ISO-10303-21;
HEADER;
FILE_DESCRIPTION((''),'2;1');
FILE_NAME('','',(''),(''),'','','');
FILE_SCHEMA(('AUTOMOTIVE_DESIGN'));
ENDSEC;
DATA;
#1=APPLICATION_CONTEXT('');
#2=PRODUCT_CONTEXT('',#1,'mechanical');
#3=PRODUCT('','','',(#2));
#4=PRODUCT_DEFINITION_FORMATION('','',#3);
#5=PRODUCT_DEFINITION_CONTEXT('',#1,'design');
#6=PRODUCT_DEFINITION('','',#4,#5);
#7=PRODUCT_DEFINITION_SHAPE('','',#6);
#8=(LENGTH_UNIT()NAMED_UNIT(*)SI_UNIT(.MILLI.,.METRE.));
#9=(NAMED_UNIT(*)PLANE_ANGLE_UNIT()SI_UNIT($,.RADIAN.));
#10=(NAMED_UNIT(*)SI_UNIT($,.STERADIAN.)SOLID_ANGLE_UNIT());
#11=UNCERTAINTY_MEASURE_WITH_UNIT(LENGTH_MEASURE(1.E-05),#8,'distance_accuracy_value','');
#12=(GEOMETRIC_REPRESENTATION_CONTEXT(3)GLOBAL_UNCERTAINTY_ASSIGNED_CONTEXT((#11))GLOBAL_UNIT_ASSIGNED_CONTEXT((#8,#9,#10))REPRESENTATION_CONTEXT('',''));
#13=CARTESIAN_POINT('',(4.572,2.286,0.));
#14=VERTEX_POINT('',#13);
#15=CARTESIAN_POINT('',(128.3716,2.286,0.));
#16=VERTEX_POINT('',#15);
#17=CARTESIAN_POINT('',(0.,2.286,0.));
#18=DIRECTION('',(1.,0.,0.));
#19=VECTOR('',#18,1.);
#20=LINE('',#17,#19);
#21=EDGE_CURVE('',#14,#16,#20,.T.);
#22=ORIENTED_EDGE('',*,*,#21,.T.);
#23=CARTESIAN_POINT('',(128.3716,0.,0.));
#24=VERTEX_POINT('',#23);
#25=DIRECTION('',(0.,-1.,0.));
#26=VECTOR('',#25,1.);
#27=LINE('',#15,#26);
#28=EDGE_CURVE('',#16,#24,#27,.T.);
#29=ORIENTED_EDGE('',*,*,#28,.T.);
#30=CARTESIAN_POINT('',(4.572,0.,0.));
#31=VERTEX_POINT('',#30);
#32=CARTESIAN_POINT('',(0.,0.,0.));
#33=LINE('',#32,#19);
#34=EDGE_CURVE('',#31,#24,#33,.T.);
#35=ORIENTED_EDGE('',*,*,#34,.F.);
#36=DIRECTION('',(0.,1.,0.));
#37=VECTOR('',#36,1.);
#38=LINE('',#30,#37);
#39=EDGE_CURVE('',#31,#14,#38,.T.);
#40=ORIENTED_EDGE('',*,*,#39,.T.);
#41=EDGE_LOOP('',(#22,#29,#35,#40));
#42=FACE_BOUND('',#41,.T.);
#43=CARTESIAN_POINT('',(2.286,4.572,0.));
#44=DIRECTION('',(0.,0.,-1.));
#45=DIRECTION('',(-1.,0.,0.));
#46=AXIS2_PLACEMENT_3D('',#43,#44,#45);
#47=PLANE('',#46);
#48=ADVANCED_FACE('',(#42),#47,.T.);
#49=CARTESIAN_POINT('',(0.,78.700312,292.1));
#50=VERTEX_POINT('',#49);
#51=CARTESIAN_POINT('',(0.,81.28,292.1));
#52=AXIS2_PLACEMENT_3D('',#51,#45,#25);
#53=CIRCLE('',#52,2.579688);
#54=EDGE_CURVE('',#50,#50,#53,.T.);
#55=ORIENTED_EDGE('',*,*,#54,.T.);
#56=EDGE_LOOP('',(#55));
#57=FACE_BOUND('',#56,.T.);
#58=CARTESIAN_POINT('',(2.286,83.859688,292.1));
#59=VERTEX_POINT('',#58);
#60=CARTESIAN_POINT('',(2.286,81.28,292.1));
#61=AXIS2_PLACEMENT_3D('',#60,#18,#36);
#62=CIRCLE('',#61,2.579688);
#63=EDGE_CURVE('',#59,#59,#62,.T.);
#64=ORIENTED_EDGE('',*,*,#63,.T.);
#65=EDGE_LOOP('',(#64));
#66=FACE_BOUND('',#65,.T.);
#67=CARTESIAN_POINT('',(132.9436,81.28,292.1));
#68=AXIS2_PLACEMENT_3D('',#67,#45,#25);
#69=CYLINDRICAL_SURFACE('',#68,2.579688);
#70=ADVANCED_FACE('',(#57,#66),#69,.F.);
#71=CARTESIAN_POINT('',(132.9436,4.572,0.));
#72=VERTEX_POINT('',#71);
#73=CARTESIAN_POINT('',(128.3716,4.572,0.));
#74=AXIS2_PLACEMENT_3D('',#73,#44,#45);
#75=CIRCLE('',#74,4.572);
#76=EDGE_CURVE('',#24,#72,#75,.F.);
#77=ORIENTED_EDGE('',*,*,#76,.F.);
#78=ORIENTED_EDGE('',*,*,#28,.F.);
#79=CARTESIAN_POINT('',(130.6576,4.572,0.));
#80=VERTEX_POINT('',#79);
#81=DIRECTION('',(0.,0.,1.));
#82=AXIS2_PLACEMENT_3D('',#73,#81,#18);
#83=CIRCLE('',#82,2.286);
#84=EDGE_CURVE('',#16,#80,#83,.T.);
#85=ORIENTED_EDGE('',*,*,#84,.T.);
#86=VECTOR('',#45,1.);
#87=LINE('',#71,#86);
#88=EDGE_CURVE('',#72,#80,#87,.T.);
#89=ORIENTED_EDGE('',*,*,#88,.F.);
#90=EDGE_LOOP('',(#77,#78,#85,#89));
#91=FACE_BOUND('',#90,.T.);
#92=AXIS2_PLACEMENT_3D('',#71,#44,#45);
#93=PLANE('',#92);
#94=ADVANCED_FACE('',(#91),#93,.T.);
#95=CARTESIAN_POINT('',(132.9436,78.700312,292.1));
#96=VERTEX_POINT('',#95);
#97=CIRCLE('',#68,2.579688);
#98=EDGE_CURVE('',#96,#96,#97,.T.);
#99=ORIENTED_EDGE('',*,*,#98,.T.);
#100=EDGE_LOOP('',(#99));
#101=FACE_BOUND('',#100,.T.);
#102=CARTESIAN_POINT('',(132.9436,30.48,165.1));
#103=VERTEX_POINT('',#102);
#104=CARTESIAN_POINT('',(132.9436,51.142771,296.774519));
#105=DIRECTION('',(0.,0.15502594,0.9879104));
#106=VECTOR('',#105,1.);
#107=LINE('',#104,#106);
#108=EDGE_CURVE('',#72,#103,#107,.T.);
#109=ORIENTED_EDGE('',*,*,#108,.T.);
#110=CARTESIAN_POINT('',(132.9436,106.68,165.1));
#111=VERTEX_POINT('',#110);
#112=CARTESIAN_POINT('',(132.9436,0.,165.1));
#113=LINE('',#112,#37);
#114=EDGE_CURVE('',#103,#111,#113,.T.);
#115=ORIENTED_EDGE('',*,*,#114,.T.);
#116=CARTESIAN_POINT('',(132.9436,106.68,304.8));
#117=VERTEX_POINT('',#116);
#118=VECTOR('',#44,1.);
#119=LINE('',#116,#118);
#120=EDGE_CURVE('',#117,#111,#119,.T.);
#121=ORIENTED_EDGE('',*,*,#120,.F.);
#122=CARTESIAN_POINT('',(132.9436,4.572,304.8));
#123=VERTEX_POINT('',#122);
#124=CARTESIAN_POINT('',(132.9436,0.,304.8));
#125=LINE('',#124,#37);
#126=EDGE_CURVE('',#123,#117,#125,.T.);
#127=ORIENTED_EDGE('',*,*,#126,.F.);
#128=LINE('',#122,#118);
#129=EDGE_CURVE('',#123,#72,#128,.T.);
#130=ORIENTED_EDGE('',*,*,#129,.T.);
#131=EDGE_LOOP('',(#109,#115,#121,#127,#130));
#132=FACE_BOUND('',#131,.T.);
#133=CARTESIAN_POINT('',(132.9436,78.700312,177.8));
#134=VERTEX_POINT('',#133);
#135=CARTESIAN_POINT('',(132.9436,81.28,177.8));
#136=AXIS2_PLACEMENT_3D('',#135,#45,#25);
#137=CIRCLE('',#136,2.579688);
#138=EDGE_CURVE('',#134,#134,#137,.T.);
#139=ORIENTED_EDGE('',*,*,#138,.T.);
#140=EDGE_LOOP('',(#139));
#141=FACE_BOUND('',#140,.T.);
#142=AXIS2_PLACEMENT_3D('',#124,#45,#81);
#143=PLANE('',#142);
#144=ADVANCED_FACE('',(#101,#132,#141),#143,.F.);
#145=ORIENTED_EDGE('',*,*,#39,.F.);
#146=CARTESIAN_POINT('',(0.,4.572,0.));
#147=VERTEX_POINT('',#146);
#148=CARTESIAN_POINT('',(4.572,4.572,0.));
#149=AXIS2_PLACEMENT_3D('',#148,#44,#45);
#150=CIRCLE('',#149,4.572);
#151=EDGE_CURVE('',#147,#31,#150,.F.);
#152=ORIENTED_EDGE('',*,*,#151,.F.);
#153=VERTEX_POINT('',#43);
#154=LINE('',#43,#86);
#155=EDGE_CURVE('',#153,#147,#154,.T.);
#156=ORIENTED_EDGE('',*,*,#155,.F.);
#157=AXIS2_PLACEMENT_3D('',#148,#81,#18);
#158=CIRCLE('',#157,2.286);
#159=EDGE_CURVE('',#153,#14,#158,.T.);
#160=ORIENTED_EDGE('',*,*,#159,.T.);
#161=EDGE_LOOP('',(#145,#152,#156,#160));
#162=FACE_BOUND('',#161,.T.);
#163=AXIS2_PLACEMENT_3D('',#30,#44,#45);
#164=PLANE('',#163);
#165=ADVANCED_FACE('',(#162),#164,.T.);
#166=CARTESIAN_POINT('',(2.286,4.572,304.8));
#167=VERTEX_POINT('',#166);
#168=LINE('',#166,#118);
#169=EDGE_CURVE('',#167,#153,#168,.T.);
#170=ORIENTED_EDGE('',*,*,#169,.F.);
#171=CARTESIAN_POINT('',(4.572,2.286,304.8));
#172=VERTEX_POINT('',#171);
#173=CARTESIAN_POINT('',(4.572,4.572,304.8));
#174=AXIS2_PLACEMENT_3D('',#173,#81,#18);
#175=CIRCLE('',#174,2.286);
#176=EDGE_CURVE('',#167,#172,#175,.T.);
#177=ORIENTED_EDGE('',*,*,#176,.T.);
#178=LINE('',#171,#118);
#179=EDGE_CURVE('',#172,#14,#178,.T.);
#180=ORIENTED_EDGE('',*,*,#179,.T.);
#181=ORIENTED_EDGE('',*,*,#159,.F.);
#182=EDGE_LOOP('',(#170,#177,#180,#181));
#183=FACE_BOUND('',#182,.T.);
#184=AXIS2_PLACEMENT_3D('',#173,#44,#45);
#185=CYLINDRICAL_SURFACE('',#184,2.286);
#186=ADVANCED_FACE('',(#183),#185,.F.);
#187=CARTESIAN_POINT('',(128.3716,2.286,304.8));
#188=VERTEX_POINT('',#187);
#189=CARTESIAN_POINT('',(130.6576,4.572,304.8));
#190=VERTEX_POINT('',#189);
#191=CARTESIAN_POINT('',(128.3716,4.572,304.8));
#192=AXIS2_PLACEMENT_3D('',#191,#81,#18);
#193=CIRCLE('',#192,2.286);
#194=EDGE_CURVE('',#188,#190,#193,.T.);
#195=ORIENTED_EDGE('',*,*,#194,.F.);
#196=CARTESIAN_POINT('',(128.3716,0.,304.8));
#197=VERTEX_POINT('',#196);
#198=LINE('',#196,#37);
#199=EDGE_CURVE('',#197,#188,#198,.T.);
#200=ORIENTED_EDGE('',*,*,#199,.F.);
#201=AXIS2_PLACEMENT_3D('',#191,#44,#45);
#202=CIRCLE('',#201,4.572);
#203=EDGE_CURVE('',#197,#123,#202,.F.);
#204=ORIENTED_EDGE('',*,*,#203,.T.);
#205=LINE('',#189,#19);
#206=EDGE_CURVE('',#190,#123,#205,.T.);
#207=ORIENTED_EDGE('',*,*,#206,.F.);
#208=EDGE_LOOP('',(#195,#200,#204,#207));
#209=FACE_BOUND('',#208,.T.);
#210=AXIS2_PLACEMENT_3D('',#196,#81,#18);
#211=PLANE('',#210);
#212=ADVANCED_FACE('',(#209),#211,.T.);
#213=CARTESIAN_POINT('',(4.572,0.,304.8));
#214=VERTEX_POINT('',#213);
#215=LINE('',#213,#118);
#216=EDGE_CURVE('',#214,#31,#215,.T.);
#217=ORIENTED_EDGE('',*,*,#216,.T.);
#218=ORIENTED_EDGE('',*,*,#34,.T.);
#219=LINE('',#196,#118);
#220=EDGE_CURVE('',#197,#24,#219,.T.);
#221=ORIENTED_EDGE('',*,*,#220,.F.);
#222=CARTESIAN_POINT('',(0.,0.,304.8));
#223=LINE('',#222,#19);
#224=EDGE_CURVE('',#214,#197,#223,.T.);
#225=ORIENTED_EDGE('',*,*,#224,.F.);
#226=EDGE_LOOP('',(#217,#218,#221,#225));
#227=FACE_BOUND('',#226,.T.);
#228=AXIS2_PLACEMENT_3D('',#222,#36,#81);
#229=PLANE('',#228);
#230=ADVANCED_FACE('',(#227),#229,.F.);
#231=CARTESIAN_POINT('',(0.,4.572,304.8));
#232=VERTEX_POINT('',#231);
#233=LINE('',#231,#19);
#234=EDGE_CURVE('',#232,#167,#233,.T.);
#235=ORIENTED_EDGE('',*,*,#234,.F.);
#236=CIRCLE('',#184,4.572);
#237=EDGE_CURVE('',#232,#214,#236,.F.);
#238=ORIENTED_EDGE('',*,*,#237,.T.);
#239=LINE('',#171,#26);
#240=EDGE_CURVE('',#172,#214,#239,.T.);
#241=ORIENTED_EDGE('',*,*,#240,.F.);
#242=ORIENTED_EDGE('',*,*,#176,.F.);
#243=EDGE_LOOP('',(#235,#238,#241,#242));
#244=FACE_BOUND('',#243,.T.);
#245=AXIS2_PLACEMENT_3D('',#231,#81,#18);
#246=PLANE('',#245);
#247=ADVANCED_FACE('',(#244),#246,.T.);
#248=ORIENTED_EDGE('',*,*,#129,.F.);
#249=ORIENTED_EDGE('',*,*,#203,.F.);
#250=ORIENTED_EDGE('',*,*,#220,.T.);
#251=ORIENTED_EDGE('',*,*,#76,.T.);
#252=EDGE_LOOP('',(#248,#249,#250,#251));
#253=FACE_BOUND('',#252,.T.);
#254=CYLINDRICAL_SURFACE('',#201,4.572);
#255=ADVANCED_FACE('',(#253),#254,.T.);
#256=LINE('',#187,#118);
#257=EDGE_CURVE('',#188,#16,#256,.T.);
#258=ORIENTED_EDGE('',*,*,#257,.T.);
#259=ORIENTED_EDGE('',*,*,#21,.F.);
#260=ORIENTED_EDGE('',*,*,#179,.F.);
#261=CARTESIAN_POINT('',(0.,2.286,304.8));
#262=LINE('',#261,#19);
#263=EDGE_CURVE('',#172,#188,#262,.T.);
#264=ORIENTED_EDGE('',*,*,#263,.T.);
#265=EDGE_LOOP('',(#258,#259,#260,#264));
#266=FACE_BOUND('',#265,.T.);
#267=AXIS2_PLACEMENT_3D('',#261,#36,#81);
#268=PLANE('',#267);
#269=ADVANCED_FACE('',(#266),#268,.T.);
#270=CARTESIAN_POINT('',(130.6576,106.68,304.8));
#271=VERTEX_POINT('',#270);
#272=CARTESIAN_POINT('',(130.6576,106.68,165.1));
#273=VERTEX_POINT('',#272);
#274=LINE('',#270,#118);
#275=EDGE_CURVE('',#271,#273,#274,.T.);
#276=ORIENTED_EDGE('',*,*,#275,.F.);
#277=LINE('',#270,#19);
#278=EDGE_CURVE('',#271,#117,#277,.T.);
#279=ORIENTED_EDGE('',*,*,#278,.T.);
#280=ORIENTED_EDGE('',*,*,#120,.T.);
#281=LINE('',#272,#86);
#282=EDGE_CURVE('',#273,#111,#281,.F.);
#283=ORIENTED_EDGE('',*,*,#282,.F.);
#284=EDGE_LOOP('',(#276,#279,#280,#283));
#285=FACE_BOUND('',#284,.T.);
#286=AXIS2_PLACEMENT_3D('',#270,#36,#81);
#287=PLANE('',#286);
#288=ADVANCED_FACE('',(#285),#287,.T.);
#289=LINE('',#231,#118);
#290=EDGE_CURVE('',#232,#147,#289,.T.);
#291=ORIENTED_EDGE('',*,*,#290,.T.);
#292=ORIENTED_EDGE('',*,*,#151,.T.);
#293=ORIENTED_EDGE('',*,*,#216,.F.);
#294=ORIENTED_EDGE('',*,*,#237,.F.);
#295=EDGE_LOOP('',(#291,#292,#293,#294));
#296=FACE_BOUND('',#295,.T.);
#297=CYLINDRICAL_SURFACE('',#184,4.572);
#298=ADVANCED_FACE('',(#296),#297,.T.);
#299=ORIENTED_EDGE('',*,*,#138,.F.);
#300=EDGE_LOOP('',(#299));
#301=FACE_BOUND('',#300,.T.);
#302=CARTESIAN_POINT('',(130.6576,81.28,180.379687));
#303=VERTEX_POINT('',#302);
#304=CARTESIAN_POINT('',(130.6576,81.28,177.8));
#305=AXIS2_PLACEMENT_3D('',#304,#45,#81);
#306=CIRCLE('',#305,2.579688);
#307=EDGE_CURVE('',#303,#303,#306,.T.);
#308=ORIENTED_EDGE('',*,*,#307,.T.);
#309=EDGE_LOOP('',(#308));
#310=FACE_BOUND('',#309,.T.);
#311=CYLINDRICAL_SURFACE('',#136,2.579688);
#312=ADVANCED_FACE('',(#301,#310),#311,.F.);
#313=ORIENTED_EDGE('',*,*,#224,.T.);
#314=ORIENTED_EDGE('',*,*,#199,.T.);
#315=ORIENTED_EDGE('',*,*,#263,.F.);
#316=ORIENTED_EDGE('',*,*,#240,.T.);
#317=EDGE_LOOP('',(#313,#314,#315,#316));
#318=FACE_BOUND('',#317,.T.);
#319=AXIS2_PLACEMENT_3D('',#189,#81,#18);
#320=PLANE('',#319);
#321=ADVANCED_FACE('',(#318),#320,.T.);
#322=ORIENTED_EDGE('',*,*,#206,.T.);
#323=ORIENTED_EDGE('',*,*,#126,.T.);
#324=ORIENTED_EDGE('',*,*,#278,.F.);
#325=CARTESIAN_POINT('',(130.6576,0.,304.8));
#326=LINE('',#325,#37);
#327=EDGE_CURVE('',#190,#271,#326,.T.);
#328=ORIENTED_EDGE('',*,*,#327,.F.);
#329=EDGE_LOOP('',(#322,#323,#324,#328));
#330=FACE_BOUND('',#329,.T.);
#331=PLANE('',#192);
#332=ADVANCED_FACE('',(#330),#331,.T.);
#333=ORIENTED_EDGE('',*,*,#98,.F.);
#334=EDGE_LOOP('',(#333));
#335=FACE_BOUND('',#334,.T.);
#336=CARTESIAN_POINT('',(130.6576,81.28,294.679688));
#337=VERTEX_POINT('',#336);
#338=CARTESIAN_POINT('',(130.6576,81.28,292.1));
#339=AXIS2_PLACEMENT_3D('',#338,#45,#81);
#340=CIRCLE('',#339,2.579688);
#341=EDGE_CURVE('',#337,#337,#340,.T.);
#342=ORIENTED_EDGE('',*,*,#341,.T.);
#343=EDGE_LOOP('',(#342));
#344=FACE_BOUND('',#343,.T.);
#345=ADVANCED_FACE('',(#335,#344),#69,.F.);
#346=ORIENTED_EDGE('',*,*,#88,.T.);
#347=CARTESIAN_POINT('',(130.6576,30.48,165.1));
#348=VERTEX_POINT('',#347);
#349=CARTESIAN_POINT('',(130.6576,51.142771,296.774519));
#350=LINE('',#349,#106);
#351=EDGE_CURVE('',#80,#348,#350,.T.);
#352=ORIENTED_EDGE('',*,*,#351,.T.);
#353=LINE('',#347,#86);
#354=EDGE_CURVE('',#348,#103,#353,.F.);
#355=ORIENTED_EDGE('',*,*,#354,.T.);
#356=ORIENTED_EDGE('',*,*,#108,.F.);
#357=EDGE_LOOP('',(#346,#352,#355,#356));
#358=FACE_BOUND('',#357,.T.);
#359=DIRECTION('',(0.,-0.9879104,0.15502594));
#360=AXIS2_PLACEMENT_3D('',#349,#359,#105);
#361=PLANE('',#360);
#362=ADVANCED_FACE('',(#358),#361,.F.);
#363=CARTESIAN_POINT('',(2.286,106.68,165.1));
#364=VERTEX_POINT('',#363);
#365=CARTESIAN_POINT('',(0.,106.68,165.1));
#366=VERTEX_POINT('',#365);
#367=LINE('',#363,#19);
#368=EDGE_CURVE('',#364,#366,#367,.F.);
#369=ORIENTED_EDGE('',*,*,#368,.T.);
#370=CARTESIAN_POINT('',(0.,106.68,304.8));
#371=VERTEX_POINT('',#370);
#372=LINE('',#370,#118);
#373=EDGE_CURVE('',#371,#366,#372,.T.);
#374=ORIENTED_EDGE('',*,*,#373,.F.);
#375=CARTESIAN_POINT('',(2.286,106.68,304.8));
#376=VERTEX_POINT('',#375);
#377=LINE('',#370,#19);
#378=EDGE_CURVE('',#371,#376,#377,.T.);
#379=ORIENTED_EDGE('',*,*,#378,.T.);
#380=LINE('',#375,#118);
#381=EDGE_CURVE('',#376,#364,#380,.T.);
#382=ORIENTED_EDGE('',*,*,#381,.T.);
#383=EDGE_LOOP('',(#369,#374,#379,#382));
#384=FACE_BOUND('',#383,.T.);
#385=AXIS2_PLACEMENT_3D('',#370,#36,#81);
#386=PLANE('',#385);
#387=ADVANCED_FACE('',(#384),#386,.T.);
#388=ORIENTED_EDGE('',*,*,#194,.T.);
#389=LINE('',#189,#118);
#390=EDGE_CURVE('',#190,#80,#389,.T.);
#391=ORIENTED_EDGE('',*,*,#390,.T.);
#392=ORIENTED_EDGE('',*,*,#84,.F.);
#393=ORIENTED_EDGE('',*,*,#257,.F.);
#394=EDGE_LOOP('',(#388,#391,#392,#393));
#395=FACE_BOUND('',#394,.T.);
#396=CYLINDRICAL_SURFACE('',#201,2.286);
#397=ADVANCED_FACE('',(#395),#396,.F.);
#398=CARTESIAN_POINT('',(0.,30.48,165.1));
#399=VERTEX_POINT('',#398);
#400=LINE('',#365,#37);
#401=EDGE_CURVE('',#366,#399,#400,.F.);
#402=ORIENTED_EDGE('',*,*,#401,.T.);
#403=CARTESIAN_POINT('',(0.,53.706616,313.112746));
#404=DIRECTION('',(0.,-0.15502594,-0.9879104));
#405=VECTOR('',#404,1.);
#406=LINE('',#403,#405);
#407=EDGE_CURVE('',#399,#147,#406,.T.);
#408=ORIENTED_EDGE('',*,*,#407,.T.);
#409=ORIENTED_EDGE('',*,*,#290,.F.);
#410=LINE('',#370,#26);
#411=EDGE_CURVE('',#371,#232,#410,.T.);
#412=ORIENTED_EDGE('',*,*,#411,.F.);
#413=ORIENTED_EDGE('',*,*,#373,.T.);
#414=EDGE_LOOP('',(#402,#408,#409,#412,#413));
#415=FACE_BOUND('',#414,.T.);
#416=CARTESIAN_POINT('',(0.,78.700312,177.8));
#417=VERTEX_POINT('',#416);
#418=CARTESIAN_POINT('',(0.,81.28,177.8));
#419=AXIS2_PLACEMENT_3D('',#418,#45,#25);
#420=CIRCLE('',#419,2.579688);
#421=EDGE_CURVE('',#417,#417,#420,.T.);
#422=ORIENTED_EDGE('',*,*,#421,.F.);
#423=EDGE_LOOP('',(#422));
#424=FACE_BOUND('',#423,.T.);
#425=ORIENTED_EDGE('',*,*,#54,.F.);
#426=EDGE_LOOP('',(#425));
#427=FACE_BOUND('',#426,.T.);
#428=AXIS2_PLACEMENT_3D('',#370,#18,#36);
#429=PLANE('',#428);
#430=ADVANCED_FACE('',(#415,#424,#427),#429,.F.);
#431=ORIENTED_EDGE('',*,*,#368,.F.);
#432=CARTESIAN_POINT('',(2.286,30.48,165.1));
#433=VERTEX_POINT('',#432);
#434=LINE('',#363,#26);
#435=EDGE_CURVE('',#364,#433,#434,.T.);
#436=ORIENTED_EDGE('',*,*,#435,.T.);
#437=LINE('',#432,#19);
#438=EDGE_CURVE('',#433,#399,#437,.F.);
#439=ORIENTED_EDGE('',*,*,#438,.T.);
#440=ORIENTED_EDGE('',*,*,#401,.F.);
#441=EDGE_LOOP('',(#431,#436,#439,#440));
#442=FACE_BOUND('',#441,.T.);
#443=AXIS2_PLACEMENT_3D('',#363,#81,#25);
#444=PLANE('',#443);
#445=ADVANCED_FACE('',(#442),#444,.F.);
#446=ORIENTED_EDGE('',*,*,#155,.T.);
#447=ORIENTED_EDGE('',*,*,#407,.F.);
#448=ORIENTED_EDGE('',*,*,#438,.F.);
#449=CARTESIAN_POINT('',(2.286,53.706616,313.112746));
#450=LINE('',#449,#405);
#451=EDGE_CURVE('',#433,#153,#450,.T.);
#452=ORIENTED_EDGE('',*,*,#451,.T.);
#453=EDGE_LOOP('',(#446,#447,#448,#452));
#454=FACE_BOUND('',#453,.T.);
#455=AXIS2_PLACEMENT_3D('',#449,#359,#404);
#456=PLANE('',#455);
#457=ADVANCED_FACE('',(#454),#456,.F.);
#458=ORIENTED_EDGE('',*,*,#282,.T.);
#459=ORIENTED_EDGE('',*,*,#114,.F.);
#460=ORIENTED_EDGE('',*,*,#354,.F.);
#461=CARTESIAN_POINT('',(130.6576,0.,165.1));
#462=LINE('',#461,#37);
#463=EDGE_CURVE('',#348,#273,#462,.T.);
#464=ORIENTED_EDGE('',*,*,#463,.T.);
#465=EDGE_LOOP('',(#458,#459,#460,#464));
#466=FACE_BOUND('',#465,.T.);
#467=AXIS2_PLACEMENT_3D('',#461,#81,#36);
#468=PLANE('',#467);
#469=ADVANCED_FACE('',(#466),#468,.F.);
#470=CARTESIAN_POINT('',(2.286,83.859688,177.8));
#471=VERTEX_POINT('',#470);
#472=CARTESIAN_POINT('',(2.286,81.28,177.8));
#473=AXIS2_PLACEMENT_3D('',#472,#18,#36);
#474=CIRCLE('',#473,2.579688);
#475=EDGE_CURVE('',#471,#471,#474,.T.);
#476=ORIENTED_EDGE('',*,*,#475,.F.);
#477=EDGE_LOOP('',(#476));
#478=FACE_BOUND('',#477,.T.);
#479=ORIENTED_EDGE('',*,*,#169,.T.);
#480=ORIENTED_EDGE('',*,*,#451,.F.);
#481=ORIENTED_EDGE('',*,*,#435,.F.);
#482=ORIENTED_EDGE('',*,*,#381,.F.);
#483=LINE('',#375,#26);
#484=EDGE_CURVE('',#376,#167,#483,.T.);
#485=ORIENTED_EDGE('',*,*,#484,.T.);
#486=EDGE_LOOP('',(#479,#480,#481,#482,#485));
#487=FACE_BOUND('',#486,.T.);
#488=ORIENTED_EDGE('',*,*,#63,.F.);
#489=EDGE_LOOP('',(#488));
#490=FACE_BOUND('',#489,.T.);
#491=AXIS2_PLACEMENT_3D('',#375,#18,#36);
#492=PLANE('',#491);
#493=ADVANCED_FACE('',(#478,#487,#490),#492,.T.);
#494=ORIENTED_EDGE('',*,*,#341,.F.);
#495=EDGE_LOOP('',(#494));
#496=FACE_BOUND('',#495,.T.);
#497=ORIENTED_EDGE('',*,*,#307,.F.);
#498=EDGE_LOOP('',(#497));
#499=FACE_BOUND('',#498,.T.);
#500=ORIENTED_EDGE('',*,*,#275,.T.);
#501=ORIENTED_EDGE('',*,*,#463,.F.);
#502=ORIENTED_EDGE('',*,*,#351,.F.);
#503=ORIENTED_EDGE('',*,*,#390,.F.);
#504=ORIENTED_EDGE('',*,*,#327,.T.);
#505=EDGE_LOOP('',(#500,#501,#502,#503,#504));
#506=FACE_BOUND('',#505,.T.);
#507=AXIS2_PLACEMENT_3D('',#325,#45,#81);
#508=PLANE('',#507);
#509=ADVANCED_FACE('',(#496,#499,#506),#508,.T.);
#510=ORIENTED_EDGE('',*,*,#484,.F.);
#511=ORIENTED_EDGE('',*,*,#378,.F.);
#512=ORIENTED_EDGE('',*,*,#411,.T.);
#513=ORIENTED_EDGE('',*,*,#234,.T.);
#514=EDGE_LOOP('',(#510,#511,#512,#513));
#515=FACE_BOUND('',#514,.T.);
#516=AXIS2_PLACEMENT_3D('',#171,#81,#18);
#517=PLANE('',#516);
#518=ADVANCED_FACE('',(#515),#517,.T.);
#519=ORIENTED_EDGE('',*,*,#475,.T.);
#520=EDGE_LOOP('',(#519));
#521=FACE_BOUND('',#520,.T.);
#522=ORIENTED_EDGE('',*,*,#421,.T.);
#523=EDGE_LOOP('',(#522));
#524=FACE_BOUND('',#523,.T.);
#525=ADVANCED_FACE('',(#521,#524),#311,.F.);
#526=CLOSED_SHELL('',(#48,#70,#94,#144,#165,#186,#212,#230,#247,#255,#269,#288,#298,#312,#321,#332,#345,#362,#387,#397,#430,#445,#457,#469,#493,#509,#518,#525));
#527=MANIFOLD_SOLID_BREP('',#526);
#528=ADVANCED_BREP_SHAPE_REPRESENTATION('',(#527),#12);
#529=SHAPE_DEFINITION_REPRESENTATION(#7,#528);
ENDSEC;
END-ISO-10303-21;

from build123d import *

# Parameters (mm, degrees)
BASE_FLANGE1_DEPTH = 304.8
CUT_EXTRUDE3_DEPTH = 350.224373693
SKETCH9_R          = 2.5796875
CUT_EXTRUDE4_DEPTH = 350.224373693


# Sheet-metal steps are written as plain solids
with BuildPart() as part:
    # Sketch1 → Base-Flange1 (new body)
    with BuildSketch(Plane.XY):
        with BuildLine():
            Line((0, 106.68), (0, 4.572))
            ThreePointArc((0, 4.572), (1.339107796, 1.339107796), (4.572, 0))
            Line((4.572, 0), (128.3716, 0))
            ThreePointArc((128.3716, 0), (131.604492204, 1.339107796), (132.9436, 4.572))
            Line((132.9436, 4.572), (132.9436, 106.68))
            Line((132.9436, 106.68), (130.6576, 106.68))
            Line((130.6576, 106.68), (130.6576, 4.572))
            ThreePointArc((130.6576, 4.572), (129.988046102, 2.955553898), (128.3716, 2.286))
            Line((128.3716, 2.286), (4.572, 2.286))
            ThreePointArc((4.572, 2.286), (2.955553898, 2.955553898), (2.286, 4.572))
            Line((2.286, 4.572), (2.286, 106.68))
            Line((2.286, 106.68), (0, 106.68))
        make_face()
    extrude(amount=BASE_FLANGE1_DEPTH)

    # Sketch6 → Cut-Extrude3 (cut, through all)
    with BuildSketch(Plane(origin=(132.9436, 0, 0), x_dir=(0, 0, -1), z_dir=(1, 0, 0))):
        Polygon((0, 4.572), (0, 106.68), (-165.1, 106.68), (-165.1, 30.48), align=None)
    extrude(amount=-CUT_EXTRUDE3_DEPTH, mode=Mode.SUBTRACT)

    # Sketch9 → Cut-Extrude4 (cut, through all)
    with BuildSketch(Plane.ZY):
        with Locations(Location((177.8, 81.28, 0), (0, 0, 270))):
            Circle(SKETCH9_R)
        with Locations(Location((292.1, 81.28, 0), (0, 0, 270))):
            Circle(SKETCH9_R)
    extrude(amount=-CUT_EXTRUDE4_DEPTH, mode=Mode.SUBTRACT)


solid = part.part
